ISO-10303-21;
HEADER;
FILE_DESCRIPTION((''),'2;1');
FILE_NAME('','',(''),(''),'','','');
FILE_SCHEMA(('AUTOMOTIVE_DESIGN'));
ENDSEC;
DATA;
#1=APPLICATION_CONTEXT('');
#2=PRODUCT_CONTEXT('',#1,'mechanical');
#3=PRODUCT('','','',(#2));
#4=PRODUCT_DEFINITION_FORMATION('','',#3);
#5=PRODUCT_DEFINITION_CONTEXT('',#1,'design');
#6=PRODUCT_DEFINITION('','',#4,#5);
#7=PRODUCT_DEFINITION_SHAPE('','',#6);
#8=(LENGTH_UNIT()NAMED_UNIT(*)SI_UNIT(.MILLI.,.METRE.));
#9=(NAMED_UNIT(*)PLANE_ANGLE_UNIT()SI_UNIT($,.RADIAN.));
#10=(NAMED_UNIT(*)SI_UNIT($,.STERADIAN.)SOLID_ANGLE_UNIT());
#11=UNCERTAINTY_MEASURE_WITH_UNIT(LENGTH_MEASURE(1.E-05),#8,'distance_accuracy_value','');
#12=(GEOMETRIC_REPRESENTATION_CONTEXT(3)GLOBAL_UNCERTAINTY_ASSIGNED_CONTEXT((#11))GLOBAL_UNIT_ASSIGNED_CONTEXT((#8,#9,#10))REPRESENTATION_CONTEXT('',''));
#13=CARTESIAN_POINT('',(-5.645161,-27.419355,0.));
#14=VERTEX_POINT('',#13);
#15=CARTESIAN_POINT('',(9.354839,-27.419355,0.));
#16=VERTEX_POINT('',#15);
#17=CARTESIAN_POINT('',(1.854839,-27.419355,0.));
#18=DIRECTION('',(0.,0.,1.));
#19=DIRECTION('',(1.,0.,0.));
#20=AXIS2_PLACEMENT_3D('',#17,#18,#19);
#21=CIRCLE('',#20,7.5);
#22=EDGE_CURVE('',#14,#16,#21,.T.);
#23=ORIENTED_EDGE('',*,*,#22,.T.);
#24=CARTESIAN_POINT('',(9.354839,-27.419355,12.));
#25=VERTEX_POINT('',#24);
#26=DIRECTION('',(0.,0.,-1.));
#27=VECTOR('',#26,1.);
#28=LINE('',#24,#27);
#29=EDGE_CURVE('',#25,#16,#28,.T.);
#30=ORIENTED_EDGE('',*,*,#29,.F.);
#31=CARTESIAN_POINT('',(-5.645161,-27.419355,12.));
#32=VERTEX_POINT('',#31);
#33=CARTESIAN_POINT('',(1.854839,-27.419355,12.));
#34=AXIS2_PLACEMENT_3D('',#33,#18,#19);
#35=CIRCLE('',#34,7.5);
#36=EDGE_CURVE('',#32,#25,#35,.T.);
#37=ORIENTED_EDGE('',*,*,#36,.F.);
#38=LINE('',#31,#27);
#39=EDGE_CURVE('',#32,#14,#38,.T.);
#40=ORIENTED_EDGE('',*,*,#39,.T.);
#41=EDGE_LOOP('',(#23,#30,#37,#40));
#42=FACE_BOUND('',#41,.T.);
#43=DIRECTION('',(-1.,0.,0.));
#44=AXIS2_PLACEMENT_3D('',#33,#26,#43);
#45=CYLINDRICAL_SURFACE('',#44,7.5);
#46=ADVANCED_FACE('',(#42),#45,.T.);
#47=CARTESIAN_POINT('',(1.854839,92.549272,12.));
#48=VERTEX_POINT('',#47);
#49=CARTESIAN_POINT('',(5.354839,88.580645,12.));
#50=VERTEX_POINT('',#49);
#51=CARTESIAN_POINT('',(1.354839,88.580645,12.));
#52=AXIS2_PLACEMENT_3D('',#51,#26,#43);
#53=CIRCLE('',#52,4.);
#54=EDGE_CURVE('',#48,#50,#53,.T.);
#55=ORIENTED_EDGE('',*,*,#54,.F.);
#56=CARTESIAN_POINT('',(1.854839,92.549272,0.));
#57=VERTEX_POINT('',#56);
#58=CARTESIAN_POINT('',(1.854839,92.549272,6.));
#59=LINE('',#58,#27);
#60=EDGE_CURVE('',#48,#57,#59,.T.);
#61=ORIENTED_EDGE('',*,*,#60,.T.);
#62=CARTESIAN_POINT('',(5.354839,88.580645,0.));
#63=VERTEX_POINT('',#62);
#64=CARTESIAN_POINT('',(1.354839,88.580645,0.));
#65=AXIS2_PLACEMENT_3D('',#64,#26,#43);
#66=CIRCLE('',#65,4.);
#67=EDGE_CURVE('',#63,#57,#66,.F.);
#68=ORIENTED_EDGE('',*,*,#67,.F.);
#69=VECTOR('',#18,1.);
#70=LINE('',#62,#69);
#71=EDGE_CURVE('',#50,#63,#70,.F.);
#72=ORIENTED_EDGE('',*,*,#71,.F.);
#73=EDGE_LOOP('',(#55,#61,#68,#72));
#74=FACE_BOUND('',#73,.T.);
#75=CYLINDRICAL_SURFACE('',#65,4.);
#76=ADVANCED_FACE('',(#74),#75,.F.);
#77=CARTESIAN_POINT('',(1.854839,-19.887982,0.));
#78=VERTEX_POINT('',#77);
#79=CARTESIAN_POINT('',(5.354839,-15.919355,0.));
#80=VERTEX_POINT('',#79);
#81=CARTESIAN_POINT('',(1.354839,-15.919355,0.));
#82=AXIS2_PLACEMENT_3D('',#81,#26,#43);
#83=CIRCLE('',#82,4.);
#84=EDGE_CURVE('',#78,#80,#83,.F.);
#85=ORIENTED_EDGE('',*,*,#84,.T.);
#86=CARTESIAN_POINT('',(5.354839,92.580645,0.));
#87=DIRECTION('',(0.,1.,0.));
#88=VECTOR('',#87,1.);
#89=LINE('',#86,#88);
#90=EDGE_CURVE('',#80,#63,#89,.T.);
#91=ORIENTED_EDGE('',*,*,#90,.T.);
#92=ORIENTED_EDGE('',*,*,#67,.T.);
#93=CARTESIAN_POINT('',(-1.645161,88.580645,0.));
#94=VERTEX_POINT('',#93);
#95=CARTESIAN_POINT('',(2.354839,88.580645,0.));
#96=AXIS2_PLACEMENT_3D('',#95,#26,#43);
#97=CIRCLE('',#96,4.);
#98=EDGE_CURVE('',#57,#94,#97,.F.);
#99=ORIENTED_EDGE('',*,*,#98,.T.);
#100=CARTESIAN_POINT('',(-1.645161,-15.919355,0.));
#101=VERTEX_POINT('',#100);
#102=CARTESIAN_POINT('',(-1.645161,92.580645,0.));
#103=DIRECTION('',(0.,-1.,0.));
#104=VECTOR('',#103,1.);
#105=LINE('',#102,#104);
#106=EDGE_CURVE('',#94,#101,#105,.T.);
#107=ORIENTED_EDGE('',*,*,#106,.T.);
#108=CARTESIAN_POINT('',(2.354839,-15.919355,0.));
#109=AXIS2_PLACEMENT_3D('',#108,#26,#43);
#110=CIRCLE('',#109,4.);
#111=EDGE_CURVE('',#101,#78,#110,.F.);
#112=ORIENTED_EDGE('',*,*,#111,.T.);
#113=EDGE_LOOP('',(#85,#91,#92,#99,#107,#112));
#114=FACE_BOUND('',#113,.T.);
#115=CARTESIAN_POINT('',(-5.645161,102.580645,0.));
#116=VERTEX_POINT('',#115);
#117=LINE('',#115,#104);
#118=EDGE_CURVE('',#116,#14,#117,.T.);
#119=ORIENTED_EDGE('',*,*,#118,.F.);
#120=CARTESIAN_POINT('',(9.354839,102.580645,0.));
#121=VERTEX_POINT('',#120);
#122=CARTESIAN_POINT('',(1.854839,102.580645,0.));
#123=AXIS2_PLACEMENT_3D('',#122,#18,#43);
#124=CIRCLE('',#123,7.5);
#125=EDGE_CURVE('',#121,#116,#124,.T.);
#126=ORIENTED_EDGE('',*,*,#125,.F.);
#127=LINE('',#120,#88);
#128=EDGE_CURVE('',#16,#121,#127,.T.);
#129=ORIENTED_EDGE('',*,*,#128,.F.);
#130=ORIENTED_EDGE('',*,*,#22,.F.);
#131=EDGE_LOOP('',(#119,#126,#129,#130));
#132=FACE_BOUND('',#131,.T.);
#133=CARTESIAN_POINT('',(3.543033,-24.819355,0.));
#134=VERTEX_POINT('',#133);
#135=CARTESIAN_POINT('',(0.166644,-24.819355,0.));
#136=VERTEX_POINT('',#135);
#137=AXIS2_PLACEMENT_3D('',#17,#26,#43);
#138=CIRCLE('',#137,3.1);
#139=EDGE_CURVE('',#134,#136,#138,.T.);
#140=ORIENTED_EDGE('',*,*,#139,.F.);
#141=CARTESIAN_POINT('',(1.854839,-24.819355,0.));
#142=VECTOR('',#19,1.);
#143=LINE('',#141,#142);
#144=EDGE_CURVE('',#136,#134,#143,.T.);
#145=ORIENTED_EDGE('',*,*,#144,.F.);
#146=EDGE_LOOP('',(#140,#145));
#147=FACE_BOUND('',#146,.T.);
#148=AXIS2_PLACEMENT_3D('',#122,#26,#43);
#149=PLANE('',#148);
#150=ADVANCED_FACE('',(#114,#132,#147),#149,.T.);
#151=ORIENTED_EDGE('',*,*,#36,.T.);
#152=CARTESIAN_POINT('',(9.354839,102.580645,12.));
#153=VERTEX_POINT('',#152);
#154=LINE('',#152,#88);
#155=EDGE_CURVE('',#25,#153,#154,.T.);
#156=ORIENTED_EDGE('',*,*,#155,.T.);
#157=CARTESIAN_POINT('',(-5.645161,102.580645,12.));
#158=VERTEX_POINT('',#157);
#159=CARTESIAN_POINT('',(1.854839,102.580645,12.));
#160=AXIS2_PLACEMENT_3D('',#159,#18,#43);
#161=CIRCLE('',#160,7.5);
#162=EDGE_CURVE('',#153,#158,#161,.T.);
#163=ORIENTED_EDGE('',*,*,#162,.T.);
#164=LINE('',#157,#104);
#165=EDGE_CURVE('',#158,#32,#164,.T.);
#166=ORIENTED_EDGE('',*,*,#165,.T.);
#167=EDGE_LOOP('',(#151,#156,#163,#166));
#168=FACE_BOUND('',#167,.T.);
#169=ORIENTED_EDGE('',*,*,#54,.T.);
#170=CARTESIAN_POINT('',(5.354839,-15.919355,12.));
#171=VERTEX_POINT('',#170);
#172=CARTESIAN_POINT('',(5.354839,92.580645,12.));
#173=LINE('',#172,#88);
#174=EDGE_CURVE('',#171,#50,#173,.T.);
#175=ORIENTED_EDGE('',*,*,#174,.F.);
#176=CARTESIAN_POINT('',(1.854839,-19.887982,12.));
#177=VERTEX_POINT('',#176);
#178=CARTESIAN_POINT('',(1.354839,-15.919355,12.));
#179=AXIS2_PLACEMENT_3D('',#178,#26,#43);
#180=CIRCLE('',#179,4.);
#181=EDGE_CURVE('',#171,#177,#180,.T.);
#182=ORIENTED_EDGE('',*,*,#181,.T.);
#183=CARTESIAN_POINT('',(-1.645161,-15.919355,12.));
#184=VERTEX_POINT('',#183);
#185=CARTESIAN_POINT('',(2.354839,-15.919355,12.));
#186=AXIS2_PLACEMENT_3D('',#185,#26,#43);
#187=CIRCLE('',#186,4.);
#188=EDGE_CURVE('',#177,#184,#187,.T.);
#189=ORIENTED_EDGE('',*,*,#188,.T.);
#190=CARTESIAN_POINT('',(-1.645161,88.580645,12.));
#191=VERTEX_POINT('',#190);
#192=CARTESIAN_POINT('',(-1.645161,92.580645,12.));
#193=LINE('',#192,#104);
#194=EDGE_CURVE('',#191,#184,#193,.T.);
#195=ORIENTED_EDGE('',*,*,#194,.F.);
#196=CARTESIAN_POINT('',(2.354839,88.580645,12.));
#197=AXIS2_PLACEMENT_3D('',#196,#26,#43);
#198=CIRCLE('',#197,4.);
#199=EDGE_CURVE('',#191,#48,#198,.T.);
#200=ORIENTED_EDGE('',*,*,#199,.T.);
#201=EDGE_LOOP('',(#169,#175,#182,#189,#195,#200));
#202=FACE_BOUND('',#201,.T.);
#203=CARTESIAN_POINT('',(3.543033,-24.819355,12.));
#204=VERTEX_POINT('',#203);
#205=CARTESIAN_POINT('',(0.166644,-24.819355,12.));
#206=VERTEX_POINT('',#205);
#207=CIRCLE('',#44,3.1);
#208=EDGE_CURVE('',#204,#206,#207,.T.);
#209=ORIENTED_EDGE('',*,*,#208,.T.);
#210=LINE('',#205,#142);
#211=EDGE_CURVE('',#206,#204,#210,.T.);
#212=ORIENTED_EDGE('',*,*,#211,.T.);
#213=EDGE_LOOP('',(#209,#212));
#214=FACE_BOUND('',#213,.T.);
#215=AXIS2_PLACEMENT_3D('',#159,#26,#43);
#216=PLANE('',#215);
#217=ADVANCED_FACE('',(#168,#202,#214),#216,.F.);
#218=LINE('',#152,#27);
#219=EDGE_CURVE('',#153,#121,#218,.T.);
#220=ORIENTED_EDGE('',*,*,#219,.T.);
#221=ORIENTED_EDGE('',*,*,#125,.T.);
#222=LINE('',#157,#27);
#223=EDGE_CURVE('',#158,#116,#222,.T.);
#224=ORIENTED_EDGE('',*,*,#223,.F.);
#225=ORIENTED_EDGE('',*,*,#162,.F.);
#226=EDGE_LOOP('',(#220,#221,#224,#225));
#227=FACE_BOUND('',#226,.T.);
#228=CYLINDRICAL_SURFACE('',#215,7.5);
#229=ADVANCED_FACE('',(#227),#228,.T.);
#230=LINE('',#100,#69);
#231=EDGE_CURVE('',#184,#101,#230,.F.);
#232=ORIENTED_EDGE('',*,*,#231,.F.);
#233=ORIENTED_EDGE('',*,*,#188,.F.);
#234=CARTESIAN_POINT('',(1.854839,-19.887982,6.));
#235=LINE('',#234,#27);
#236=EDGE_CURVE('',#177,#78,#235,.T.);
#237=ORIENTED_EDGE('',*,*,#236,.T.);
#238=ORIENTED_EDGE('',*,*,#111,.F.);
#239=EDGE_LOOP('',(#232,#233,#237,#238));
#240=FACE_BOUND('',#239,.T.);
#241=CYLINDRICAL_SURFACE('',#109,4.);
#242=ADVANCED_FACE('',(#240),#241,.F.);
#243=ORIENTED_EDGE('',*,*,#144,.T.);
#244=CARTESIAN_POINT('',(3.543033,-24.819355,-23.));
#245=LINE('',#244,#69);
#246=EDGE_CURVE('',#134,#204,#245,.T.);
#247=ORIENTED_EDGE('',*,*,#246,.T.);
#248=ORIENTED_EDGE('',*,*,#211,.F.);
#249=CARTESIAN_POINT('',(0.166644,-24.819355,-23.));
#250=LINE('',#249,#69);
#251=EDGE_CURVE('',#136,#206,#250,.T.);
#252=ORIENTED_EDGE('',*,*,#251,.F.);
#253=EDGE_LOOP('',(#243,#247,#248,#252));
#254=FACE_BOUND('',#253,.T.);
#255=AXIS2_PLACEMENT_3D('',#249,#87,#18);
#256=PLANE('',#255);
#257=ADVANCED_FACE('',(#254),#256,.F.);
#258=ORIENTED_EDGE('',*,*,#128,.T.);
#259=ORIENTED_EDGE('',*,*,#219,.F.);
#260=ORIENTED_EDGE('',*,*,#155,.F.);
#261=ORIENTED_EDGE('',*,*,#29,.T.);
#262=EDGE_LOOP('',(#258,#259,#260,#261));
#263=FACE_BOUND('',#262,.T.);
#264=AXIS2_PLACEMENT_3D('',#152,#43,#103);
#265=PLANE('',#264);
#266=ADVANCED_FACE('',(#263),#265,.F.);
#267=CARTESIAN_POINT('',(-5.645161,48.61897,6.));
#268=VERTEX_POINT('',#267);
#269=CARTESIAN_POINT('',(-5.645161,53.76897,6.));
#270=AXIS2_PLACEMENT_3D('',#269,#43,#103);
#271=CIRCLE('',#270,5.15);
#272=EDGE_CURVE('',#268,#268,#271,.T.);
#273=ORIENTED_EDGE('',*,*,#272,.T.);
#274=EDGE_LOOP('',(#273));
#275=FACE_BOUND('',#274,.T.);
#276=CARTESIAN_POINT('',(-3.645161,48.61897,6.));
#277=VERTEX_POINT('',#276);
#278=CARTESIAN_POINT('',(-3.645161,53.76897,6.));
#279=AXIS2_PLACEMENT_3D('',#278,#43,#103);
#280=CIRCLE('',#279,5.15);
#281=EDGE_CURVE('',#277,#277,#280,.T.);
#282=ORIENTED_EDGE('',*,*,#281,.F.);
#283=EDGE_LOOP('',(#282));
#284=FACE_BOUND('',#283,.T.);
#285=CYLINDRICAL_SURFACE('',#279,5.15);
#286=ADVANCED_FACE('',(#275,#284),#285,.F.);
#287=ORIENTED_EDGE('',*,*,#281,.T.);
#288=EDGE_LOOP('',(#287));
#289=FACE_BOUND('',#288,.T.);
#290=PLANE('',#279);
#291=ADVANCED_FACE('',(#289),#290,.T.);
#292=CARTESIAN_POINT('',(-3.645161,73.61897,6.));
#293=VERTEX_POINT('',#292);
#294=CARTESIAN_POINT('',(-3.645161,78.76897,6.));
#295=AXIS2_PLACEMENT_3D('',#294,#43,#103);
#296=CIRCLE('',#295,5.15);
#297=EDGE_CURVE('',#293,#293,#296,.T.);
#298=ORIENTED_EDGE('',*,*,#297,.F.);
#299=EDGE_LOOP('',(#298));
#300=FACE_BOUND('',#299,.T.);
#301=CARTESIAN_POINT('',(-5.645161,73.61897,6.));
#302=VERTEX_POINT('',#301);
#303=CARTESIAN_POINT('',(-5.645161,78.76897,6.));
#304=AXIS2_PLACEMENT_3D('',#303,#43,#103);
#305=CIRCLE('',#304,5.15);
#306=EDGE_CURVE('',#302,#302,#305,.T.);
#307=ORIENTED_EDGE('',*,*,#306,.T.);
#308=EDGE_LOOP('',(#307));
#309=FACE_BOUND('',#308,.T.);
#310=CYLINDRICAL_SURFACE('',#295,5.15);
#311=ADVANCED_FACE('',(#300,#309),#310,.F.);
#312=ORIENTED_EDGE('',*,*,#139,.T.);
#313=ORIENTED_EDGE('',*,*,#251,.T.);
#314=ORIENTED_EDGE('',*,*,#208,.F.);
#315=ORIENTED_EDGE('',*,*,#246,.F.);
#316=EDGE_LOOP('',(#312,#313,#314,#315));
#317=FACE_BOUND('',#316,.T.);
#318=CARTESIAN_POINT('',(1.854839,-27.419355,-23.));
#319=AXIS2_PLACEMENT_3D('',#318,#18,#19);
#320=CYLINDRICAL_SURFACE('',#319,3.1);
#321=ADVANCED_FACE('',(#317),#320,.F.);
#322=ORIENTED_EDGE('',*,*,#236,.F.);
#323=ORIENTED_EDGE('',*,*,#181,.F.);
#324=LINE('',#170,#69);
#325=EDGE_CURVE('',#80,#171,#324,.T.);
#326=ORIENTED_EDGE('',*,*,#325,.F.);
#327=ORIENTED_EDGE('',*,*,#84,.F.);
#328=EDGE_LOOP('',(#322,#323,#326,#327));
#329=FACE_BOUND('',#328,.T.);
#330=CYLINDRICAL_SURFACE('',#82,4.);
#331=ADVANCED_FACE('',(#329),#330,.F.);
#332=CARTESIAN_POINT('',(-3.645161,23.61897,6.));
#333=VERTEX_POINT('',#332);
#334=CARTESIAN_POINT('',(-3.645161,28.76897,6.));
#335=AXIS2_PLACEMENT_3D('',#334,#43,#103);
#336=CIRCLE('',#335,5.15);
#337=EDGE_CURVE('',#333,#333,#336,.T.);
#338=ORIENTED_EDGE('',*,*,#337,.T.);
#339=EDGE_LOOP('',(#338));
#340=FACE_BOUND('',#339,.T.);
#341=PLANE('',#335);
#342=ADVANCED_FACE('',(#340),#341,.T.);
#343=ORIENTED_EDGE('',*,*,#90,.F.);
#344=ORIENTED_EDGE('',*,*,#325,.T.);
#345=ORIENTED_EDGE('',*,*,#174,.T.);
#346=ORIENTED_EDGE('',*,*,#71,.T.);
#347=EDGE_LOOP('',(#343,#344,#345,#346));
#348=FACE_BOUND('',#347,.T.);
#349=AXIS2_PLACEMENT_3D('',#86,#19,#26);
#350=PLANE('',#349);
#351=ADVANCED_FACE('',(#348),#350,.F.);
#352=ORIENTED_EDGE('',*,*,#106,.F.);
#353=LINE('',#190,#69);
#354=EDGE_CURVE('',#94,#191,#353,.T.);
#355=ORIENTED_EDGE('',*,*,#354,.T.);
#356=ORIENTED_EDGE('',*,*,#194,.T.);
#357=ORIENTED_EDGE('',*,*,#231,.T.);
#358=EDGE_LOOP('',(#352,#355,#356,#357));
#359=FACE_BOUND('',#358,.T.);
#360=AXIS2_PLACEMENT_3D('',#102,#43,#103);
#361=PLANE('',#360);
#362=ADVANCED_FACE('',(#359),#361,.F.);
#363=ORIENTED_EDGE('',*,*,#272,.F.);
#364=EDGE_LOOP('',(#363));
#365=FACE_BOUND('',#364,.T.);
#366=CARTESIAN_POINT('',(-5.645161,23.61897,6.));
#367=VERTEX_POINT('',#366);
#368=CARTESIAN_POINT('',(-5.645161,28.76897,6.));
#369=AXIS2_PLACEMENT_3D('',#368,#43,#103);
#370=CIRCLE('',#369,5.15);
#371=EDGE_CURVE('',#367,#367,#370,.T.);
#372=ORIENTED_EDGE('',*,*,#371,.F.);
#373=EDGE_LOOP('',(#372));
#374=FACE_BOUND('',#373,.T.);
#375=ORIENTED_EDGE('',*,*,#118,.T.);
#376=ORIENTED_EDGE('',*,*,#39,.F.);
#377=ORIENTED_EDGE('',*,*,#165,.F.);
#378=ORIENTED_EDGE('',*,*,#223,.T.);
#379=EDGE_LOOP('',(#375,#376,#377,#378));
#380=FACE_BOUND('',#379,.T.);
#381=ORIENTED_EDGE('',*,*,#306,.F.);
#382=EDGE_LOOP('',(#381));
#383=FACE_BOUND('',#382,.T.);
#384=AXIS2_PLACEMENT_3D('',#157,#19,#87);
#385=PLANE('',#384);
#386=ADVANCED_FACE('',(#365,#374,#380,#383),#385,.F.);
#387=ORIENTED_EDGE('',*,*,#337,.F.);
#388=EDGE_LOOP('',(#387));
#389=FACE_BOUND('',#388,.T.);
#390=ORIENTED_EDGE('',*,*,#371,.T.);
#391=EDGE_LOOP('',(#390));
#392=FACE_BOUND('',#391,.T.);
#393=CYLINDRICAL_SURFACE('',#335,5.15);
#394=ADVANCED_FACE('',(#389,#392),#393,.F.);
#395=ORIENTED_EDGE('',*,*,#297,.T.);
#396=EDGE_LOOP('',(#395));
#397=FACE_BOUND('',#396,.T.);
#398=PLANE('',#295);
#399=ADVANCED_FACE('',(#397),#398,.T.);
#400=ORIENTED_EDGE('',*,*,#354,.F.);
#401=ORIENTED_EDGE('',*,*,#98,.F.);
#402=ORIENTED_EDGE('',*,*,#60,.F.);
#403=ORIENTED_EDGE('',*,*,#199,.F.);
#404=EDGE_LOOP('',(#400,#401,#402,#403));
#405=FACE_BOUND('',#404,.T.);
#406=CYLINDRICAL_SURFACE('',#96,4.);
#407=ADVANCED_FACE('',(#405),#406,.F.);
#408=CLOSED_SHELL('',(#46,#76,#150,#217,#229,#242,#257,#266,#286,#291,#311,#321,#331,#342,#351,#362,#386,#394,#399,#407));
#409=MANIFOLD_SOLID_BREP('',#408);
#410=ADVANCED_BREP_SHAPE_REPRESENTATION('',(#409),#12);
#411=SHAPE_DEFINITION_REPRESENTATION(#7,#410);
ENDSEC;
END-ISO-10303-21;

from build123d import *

# Parameters (mm, degrees)
BOSS_EXTRUDE1_DEPTH = 12
SKETCH2_R           = 3.1
BOSS_EXTRUDE2_DEPTH = 15
CUT_EXTRUDE1_START  = -50
CUT_EXTRUDE1_DEPTH  = 50
CUT_EXTRUDE2_START  = -15
CUT_EXTRUDE2_DEPTH  = 15
SKETCH5_W           = 7
SKETCH5_H           = 112.5
CUT_EXTRUDE3_DEPTH  = 12
SKETCH6_R           = 5.15
CUT_EXTRUDE4_DEPTH  = 2
FILLET1_R           = 4


with BuildPart() as part:
    # Sketch1 → Boss-Extrude1 (new body)
    with BuildSketch(Plane.XY):
        with BuildLine():
            Line((-5.64516129, 102.580645161), (-5.64516129, -27.419354839))
            ThreePointArc((-5.64516129, -27.419354839), (1.85483871, -34.919354839), (9.35483871, -27.419354839))
            Line((9.35483871, -27.419354839), (9.35483871, 102.580645161))
            ThreePointArc((9.35483871, 102.580645161), (1.85483871, 110.080645161), (-5.64516129, 102.580645161))
        make_face()
    extrude(amount=BOSS_EXTRUDE1_DEPTH)

    # Sketch2 → Boss-Extrude2 (add)
    with BuildSketch(Plane.XY.offset(12)):
        with Locations(Location((1.85483871, -27.419354839, 0), (0, 0, 180))):
            Circle(SKETCH2_R)
    extrude(amount=BOSS_EXTRUDE2_DEPTH)

    # Sketch3 → Cut-Extrude1 (cut)
    with BuildSketch(Plane.XY.offset(27).offset(CUT_EXTRUDE1_START)):
        with BuildLine():
            Line((0.166644408, -24.819354839), (3.543033011, -24.819354839))
            ThreePointArc((3.543033011, -24.819354839), (1.85483871, -30.519354839), (0.166644408, -24.819354839))
        make_face()
    extrude(amount=CUT_EXTRUDE1_DEPTH, mode=Mode.SUBTRACT)

    # Sketch4 → Cut-Extrude2 (cut)
    with BuildSketch(Plane.XY.offset(27).offset(CUT_EXTRUDE2_START)):
        with BuildLine():
            Line((0.166644408, -24.819354839), (3.543033011, -24.819354839))
            ThreePointArc((3.543033011, -24.819354839), (1.85483871, -24.319354839), (0.166644408, -24.819354839))
        make_face()
    extrude(amount=CUT_EXTRUDE2_DEPTH, mode=Mode.SUBTRACT)

    # Sketch5 → Cut-Extrude3 (cut)
    with BuildSketch(Plane.XY.offset(12)):
        with Locations((1.85483871, 36.330645161)):
            Rectangle(SKETCH5_W, SKETCH5_H)
    extrude(amount=-CUT_EXTRUDE3_DEPTH, mode=Mode.SUBTRACT)

    # Sketch6 → Cut-Extrude4 (cut)
    with BuildSketch(Plane.ZY.offset(5.64516129)):
        with Locations(Location((6, 78.768969581, 0), (0, 0, 270))):
            Circle(SKETCH6_R)
        with Locations(Location((6, 53.768969581, 0), (0, 0, 270))):
            Circle(SKETCH6_R)
        with Locations(Location((6, 28.768969581, 0), (0, 0, 270))):
            Circle(SKETCH6_R)
    extrude(amount=-CUT_EXTRUDE4_DEPTH, mode=Mode.SUBTRACT)

    # Fillet1
    # the kernel refuses this fillet: 4 mm, written as the material it adds along each edge
    with BuildSketch(Plane(origin=(-1.64516129, -19.919354839, 12), x_dir=(0, 1, 0), z_dir=(0, 0, -1)), Plane(origin=(5.35483871, -19.919354839, 12), x_dir=(-1, 0, 0), z_dir=(0, 0, -1)), Plane(origin=(5.35483871, 92.580645161, 12), x_dir=(0, -1, 0), z_dir=(0, 0, -1))) as fillet1_piece_1:
        with BuildLine():
            CenterArc((FILLET1_R, FILLET1_R), FILLET1_R, 180, 90)
            Line((0, FILLET1_R), (0, 0))
            Line((0, 0), (FILLET1_R, 0))
        make_face()
    extrude(amount=12)
    with BuildSketch(Plane(origin=(-1.64516129, 92.580645161, 12), x_dir=(0, -1, 0), z_dir=(0, 0, -1))) as fillet1_piece_2:
        with BuildLine():
            CenterArc((FILLET1_R, -FILLET1_R), FILLET1_R, 90, 90)
            Line((0, -FILLET1_R), (0, 0))
            Line((0, 0), (FILLET1_R, 0))
        make_face()
    extrude(amount=12)


solid = part.part
